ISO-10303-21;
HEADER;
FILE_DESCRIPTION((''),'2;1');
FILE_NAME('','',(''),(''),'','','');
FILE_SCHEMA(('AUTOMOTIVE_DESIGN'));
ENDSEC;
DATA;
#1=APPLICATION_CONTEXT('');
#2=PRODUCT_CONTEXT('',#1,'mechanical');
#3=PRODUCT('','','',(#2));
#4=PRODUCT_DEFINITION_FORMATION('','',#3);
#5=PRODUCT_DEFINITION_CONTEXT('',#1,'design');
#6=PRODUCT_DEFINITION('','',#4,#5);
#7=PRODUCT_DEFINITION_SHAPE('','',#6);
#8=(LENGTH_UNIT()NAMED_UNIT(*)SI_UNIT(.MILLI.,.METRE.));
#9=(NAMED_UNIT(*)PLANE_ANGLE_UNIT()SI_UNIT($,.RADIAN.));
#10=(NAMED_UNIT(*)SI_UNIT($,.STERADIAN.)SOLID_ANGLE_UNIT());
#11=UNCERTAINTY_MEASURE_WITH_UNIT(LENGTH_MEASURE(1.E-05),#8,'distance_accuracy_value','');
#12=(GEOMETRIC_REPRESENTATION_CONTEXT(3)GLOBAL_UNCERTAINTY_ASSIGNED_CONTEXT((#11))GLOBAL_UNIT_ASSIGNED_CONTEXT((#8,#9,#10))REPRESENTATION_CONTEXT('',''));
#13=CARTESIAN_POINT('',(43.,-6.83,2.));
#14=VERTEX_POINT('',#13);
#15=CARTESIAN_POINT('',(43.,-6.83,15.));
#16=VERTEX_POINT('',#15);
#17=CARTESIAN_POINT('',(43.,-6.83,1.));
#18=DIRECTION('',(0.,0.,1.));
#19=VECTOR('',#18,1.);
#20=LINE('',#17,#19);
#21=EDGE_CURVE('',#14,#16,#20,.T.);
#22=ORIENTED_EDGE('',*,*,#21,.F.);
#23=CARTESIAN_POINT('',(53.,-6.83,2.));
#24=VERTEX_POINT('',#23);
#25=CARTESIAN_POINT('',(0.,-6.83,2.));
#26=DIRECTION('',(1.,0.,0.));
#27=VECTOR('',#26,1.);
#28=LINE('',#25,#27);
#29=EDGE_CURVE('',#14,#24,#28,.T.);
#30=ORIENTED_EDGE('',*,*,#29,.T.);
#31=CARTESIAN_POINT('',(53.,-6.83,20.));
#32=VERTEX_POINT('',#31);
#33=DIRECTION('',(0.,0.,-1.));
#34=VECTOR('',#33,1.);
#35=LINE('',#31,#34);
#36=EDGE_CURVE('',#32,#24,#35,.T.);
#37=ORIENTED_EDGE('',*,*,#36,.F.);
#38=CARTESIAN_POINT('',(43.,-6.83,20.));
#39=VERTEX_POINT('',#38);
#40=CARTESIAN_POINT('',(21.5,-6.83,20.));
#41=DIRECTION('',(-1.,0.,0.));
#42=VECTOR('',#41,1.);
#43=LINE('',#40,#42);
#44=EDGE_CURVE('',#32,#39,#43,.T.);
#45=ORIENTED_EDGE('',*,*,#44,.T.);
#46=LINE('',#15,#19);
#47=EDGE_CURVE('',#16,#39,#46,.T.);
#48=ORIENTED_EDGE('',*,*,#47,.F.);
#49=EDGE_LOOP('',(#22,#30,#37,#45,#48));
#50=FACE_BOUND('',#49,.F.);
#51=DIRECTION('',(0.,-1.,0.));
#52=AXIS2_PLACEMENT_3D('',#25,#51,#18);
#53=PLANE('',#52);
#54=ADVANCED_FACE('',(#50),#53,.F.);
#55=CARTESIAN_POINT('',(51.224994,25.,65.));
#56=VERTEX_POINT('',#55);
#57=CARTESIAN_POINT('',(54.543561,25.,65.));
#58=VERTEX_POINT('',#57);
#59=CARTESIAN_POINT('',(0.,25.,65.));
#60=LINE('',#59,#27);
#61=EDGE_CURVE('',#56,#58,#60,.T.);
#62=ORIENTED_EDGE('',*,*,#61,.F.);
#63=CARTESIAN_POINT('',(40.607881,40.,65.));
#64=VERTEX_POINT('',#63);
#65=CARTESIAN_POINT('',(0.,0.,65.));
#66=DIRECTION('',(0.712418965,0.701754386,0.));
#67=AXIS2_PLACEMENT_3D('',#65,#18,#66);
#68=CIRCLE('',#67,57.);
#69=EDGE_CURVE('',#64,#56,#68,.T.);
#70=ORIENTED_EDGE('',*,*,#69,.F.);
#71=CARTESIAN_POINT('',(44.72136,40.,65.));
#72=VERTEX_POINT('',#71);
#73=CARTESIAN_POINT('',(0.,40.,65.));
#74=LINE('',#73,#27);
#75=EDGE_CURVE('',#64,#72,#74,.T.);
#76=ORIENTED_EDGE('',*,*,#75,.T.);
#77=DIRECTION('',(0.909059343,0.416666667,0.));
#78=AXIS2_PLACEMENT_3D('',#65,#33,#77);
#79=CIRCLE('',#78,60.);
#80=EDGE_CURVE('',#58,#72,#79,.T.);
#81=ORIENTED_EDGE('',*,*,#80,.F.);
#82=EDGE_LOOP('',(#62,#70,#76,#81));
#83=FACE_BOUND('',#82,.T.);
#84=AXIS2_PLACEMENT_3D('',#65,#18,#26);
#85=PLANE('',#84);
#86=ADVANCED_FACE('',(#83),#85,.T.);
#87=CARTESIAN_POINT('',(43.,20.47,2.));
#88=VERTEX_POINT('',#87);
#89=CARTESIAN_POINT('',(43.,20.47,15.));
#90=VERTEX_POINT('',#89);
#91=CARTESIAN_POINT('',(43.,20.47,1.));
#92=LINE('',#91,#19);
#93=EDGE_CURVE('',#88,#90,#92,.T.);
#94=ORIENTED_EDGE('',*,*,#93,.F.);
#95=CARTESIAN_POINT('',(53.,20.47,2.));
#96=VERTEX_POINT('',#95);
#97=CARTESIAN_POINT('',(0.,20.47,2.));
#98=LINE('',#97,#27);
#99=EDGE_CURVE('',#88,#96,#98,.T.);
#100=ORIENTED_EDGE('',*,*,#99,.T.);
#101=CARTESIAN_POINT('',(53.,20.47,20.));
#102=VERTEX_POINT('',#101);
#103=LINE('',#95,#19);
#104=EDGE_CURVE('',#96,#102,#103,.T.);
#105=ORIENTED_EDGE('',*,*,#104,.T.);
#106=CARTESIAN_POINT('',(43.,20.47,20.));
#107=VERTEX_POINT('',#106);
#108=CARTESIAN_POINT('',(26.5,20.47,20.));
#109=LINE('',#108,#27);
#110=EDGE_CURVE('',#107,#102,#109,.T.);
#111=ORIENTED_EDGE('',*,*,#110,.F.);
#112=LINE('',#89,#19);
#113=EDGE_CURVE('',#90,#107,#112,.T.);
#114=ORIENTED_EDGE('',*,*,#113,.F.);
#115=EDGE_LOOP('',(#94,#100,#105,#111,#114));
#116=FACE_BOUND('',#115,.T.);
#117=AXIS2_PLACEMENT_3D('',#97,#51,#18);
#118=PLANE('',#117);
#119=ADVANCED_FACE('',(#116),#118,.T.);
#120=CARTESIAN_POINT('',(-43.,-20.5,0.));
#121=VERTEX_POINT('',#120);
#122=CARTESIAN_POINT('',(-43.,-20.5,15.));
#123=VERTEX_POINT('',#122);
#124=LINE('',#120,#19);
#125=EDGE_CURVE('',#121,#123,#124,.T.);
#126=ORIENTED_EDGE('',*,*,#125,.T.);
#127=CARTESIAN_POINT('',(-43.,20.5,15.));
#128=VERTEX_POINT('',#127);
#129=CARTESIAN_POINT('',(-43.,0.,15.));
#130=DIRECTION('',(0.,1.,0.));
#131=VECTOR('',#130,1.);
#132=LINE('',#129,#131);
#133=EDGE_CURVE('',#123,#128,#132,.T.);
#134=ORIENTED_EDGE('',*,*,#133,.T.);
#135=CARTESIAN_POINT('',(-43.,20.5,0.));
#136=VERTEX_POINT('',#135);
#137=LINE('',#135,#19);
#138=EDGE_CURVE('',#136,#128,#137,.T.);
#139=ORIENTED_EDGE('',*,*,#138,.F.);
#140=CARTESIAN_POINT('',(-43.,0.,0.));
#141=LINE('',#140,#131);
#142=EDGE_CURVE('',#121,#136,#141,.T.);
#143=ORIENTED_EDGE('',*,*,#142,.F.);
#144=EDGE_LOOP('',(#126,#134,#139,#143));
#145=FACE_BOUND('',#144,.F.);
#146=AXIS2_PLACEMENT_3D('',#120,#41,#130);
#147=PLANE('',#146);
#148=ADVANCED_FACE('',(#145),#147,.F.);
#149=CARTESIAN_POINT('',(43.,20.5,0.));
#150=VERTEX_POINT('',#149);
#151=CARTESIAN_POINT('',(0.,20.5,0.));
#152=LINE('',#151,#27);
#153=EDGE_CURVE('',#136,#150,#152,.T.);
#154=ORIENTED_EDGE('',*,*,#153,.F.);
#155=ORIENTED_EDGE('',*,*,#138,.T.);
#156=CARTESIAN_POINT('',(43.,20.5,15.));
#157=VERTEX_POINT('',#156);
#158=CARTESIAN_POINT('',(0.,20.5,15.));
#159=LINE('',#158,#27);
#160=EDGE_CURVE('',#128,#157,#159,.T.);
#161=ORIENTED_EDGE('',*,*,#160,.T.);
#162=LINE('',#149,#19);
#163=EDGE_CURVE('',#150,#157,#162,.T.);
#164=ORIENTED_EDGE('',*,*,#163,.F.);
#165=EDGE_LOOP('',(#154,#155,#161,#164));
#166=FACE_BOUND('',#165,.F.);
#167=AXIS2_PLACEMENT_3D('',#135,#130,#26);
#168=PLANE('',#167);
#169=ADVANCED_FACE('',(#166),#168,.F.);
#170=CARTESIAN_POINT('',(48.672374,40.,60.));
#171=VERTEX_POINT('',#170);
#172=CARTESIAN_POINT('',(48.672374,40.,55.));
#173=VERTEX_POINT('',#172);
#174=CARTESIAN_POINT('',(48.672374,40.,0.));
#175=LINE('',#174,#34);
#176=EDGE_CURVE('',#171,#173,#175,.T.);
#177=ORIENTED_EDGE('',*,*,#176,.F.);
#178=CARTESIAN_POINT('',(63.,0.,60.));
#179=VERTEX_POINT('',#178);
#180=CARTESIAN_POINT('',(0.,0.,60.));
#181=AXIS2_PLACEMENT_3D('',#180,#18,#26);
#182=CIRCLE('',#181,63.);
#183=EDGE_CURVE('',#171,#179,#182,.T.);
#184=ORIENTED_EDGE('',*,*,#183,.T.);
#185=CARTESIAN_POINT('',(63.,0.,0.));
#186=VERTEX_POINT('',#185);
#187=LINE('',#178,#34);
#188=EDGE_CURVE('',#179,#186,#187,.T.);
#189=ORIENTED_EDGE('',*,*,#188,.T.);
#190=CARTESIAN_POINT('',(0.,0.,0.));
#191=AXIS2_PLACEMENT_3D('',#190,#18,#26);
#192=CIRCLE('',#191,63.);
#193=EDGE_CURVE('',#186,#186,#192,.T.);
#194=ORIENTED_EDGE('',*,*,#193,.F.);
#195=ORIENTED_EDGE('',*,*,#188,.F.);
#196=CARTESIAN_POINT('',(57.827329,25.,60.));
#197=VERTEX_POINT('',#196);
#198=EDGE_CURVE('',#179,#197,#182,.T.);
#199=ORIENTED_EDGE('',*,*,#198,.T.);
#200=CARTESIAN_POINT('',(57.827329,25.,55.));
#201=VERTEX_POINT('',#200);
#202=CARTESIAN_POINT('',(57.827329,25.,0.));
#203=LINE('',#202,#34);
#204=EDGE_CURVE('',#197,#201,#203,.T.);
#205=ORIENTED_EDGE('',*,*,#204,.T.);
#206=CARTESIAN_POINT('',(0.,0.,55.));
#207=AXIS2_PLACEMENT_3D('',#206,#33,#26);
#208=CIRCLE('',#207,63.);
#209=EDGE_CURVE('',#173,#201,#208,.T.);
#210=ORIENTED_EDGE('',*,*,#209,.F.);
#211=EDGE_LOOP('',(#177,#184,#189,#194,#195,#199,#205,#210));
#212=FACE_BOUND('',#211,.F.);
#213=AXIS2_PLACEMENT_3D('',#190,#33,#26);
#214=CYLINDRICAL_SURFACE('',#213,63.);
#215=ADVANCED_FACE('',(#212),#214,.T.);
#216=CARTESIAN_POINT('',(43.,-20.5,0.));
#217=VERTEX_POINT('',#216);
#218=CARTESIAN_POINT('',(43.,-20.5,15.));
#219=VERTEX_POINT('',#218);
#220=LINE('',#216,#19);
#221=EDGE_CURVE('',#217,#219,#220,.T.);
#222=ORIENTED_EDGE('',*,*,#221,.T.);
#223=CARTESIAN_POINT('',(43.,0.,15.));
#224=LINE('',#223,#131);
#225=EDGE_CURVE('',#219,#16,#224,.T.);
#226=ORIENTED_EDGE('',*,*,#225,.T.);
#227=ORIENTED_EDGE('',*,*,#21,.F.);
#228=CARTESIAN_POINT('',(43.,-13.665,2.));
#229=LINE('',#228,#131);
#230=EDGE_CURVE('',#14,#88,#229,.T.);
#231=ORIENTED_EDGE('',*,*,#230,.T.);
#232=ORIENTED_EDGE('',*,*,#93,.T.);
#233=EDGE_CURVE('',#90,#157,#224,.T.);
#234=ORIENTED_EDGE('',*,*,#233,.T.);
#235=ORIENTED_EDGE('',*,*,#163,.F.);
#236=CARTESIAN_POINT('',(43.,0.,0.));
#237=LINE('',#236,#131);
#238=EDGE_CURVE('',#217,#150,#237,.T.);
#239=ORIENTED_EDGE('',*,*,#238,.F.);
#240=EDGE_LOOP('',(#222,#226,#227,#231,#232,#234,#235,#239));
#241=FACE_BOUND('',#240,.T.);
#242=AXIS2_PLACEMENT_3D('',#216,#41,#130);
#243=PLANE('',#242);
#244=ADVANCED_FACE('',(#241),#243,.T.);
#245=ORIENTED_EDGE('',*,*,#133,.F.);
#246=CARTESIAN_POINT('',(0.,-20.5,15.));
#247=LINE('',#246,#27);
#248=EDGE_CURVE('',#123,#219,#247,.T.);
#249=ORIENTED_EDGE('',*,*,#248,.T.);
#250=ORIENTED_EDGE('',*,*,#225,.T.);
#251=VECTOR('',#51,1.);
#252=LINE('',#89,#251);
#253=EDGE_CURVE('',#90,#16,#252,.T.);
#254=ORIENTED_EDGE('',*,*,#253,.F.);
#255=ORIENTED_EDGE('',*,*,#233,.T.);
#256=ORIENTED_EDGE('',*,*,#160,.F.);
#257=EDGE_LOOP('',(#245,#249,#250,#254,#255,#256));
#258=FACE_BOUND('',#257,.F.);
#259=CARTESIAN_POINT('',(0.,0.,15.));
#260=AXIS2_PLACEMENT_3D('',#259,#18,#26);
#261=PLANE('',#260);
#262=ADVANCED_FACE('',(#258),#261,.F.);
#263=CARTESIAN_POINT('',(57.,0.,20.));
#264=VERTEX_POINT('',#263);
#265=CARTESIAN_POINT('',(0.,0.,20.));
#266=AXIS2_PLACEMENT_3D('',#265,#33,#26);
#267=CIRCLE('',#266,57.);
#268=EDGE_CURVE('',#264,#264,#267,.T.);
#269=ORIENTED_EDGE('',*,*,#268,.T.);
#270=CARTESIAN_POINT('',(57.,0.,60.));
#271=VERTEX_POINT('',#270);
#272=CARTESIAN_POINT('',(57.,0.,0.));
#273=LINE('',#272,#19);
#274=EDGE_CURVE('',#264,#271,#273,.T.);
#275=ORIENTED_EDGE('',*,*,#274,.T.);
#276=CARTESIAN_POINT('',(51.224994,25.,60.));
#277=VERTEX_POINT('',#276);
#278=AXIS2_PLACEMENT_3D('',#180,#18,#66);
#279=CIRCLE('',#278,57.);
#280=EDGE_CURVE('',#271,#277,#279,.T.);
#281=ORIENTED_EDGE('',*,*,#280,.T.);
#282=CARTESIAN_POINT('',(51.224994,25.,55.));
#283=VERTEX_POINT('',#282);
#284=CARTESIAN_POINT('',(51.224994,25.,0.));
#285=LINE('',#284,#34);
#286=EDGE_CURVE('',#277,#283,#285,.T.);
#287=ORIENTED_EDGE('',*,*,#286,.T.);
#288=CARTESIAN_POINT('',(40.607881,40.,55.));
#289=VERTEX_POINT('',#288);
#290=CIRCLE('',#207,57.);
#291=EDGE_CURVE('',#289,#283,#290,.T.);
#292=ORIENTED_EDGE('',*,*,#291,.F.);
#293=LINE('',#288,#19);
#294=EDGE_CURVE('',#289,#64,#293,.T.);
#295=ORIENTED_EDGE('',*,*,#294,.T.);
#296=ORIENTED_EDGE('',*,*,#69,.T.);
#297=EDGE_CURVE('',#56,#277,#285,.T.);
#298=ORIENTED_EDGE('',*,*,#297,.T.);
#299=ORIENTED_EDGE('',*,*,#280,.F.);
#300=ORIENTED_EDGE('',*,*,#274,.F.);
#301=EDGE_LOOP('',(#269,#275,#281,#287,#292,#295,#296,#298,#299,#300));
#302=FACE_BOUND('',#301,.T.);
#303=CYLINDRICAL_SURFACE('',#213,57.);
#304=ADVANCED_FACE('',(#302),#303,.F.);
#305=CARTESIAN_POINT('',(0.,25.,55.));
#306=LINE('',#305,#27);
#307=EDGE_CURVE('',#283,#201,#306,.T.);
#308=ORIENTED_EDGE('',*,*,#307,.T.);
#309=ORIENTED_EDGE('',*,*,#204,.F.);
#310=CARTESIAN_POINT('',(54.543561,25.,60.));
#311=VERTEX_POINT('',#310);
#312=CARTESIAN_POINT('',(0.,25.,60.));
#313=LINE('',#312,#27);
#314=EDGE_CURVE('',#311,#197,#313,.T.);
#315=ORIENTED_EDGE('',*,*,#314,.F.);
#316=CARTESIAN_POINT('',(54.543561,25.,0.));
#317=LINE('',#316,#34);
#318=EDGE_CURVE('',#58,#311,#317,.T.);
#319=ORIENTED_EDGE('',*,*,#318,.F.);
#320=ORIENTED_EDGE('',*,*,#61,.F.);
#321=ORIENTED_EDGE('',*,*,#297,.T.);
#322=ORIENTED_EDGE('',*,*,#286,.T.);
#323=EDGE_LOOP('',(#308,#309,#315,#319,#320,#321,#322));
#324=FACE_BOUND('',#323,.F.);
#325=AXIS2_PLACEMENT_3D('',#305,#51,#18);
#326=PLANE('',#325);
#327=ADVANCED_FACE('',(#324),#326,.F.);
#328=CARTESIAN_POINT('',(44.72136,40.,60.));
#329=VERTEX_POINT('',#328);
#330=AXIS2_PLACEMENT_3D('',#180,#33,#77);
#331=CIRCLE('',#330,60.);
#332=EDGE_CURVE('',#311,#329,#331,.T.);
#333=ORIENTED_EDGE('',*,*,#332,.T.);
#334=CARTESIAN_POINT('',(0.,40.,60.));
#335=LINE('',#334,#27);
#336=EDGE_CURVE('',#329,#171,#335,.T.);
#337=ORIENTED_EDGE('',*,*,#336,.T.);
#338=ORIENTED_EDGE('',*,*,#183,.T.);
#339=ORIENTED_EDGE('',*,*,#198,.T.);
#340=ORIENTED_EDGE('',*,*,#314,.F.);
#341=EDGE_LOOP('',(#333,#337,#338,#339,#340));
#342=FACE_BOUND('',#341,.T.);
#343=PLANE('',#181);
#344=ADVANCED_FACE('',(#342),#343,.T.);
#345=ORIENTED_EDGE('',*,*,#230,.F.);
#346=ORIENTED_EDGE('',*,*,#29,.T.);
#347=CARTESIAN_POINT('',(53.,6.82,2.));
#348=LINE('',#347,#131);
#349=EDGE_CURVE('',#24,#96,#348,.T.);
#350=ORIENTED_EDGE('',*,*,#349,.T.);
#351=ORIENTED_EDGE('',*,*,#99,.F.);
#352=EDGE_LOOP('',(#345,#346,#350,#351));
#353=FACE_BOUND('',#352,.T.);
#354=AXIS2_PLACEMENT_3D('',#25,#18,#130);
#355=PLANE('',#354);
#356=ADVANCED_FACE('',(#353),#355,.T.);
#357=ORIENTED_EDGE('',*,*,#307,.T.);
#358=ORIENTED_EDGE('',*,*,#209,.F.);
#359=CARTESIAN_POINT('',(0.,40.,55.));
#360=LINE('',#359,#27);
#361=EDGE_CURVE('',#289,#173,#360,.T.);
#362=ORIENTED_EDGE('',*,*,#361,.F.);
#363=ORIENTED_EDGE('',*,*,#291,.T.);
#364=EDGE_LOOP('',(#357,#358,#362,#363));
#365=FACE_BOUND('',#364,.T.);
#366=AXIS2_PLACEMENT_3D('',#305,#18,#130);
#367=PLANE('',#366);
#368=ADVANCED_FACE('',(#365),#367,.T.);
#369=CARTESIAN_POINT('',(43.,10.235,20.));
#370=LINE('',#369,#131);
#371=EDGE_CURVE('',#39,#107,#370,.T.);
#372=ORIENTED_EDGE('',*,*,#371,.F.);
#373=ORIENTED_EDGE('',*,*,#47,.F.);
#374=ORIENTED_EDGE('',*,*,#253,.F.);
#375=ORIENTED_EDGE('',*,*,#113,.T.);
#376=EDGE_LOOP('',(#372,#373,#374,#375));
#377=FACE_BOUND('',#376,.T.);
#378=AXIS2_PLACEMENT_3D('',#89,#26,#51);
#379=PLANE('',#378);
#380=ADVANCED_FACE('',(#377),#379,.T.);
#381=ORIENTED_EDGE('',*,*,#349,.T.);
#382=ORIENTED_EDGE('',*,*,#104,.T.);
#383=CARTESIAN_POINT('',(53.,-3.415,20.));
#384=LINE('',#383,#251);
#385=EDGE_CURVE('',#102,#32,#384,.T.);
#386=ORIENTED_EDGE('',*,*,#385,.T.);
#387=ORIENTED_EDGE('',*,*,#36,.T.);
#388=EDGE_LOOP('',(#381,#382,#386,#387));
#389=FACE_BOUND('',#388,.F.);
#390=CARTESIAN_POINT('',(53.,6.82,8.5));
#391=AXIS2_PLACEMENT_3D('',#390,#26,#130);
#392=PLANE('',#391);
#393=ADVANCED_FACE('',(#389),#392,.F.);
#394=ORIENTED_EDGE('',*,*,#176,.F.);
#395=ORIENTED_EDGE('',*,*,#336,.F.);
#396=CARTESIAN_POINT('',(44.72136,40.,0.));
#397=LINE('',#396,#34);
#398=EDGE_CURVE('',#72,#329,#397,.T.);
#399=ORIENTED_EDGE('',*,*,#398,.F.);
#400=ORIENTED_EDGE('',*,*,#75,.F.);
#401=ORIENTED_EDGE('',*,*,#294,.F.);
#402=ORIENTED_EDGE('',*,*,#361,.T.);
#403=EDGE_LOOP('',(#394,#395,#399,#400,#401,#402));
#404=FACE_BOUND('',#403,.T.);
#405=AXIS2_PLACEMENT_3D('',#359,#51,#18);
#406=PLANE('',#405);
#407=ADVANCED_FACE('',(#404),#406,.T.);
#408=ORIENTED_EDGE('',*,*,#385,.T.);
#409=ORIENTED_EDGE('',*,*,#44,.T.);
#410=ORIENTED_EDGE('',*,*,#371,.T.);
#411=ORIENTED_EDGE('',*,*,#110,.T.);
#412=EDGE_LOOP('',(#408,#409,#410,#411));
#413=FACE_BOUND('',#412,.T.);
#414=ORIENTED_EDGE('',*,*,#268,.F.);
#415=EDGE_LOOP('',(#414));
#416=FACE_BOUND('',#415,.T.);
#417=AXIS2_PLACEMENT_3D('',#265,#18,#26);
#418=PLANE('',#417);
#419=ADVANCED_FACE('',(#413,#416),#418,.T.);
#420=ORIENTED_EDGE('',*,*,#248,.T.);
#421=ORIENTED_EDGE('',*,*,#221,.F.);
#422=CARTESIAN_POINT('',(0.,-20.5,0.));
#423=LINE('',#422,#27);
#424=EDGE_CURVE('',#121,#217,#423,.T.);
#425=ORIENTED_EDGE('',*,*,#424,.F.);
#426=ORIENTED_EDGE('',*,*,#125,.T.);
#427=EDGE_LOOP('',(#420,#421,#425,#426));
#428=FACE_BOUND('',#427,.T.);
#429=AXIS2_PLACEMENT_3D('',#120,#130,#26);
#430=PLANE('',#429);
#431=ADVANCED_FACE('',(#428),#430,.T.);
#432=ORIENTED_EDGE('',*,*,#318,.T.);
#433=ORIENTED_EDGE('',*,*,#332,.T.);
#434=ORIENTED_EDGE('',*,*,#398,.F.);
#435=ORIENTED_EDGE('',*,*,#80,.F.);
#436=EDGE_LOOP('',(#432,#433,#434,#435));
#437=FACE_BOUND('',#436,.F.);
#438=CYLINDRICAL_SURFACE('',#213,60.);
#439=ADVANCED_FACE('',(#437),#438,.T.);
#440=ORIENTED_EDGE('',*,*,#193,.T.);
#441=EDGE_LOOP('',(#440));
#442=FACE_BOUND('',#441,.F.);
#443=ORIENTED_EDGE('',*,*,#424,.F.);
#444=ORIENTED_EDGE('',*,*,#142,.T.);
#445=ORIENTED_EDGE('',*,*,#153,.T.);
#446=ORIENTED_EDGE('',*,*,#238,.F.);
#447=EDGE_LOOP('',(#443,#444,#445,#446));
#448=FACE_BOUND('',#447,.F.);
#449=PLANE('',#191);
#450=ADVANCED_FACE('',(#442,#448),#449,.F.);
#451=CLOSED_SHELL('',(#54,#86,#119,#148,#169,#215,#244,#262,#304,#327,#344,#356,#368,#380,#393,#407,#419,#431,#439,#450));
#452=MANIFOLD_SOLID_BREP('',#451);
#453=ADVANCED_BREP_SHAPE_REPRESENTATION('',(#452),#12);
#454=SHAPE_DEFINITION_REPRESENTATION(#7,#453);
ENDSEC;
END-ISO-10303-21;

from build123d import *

# Parameters (mm, degrees)
F0_R      = 63
F0_R_2    = 60
F2_DEPTH  = 60
F1_R      = 60
F1_R_2    = 57
F3_DEPTH  = 65
F4_R      = 57
F5_DEPTH  = 60
F7_R      = 57
F8_DEPTH  = 40
F9_W      = 15
F9_H      = 10
F10_DEPTH = 279.5
F11_DEPTH = 71.5
F13_R     = 63
F14_DEPTH = 20
F15_W     = 86
F15_H     = 41
F16_DEPTH = 15
F17_W     = 27.3
F17_H     = 13
F18_DEPTH = 53
F20_DEPTH = 25


# Not quite as in the source:
# - a feature names something its author has since deleted; it is built from what else it names


with BuildPart() as f2:
    # F0 (on Top) → F2 (new body)
    with BuildSketch(Plane.XY):
        Circle(F0_R)
        Circle(F0_R_2, mode=Mode.SUBTRACT)
    extrude(amount=F2_DEPTH)

    # F1 (on Top) → F3 (join)
    with BuildSketch(Plane.XY):
        Circle(F1_R)
        Circle(F1_R_2, mode=Mode.SUBTRACT)
    extrude(amount=F3_DEPTH)

    # F4 (on Top) → F5 (join)
    with BuildSketch(Plane.XY):
        Circle(F4_R)
    extrude(amount=F5_DEPTH)

    # F7 (on offset) → F8 (cut)
    with BuildSketch(Plane.XY.offset(45)):
        Circle(F7_R)
    extrude(amount=-F8_DEPTH, mode=Mode.SUBTRACT)

    # F9 (on Right) → F10 (cut)
    with BuildSketch(Plane.YZ):
        with Locations((32.5, 60)):
            Rectangle(F9_W, F9_H)
    extrude(amount=F10_DEPTH, mode=Mode.SUBTRACT)

    # F1 (on Top) → F11 (cut)
    with BuildSketch(Plane.XY):
        Circle(F1_R_2)
    extrude(amount=F11_DEPTH, mode=Mode.SUBTRACT)

    # F13 (on Top) → F14 (join)
    with BuildSketch(Plane.XY):
        Circle(F13_R)
    extrude(amount=F14_DEPTH)

    # F15 (on Top) → F16 (cut)
    with BuildSketch(Plane.XY):
        Rectangle(F15_W, F15_H)
    extrude(amount=F16_DEPTH, mode=Mode.SUBTRACT)

    # F17 (on Right) → F18 (cut)
    with BuildSketch(Plane.YZ):
        with Locations((6.82, 8.5)):
            Rectangle(F17_W, F17_H)
    extrude(amount=F18_DEPTH, mode=Mode.SUBTRACT)

    # F19 (on offset) → F20 (cut)
    with BuildSketch(Plane.XY.offset(15)):
        Polygon((43, 20.47), (43, 0), (43, -6.83), (53, -6.83), (53, 20.47), align=None)
    extrude(amount=F20_DEPTH, mode=Mode.SUBTRACT)


solid = f2.part
